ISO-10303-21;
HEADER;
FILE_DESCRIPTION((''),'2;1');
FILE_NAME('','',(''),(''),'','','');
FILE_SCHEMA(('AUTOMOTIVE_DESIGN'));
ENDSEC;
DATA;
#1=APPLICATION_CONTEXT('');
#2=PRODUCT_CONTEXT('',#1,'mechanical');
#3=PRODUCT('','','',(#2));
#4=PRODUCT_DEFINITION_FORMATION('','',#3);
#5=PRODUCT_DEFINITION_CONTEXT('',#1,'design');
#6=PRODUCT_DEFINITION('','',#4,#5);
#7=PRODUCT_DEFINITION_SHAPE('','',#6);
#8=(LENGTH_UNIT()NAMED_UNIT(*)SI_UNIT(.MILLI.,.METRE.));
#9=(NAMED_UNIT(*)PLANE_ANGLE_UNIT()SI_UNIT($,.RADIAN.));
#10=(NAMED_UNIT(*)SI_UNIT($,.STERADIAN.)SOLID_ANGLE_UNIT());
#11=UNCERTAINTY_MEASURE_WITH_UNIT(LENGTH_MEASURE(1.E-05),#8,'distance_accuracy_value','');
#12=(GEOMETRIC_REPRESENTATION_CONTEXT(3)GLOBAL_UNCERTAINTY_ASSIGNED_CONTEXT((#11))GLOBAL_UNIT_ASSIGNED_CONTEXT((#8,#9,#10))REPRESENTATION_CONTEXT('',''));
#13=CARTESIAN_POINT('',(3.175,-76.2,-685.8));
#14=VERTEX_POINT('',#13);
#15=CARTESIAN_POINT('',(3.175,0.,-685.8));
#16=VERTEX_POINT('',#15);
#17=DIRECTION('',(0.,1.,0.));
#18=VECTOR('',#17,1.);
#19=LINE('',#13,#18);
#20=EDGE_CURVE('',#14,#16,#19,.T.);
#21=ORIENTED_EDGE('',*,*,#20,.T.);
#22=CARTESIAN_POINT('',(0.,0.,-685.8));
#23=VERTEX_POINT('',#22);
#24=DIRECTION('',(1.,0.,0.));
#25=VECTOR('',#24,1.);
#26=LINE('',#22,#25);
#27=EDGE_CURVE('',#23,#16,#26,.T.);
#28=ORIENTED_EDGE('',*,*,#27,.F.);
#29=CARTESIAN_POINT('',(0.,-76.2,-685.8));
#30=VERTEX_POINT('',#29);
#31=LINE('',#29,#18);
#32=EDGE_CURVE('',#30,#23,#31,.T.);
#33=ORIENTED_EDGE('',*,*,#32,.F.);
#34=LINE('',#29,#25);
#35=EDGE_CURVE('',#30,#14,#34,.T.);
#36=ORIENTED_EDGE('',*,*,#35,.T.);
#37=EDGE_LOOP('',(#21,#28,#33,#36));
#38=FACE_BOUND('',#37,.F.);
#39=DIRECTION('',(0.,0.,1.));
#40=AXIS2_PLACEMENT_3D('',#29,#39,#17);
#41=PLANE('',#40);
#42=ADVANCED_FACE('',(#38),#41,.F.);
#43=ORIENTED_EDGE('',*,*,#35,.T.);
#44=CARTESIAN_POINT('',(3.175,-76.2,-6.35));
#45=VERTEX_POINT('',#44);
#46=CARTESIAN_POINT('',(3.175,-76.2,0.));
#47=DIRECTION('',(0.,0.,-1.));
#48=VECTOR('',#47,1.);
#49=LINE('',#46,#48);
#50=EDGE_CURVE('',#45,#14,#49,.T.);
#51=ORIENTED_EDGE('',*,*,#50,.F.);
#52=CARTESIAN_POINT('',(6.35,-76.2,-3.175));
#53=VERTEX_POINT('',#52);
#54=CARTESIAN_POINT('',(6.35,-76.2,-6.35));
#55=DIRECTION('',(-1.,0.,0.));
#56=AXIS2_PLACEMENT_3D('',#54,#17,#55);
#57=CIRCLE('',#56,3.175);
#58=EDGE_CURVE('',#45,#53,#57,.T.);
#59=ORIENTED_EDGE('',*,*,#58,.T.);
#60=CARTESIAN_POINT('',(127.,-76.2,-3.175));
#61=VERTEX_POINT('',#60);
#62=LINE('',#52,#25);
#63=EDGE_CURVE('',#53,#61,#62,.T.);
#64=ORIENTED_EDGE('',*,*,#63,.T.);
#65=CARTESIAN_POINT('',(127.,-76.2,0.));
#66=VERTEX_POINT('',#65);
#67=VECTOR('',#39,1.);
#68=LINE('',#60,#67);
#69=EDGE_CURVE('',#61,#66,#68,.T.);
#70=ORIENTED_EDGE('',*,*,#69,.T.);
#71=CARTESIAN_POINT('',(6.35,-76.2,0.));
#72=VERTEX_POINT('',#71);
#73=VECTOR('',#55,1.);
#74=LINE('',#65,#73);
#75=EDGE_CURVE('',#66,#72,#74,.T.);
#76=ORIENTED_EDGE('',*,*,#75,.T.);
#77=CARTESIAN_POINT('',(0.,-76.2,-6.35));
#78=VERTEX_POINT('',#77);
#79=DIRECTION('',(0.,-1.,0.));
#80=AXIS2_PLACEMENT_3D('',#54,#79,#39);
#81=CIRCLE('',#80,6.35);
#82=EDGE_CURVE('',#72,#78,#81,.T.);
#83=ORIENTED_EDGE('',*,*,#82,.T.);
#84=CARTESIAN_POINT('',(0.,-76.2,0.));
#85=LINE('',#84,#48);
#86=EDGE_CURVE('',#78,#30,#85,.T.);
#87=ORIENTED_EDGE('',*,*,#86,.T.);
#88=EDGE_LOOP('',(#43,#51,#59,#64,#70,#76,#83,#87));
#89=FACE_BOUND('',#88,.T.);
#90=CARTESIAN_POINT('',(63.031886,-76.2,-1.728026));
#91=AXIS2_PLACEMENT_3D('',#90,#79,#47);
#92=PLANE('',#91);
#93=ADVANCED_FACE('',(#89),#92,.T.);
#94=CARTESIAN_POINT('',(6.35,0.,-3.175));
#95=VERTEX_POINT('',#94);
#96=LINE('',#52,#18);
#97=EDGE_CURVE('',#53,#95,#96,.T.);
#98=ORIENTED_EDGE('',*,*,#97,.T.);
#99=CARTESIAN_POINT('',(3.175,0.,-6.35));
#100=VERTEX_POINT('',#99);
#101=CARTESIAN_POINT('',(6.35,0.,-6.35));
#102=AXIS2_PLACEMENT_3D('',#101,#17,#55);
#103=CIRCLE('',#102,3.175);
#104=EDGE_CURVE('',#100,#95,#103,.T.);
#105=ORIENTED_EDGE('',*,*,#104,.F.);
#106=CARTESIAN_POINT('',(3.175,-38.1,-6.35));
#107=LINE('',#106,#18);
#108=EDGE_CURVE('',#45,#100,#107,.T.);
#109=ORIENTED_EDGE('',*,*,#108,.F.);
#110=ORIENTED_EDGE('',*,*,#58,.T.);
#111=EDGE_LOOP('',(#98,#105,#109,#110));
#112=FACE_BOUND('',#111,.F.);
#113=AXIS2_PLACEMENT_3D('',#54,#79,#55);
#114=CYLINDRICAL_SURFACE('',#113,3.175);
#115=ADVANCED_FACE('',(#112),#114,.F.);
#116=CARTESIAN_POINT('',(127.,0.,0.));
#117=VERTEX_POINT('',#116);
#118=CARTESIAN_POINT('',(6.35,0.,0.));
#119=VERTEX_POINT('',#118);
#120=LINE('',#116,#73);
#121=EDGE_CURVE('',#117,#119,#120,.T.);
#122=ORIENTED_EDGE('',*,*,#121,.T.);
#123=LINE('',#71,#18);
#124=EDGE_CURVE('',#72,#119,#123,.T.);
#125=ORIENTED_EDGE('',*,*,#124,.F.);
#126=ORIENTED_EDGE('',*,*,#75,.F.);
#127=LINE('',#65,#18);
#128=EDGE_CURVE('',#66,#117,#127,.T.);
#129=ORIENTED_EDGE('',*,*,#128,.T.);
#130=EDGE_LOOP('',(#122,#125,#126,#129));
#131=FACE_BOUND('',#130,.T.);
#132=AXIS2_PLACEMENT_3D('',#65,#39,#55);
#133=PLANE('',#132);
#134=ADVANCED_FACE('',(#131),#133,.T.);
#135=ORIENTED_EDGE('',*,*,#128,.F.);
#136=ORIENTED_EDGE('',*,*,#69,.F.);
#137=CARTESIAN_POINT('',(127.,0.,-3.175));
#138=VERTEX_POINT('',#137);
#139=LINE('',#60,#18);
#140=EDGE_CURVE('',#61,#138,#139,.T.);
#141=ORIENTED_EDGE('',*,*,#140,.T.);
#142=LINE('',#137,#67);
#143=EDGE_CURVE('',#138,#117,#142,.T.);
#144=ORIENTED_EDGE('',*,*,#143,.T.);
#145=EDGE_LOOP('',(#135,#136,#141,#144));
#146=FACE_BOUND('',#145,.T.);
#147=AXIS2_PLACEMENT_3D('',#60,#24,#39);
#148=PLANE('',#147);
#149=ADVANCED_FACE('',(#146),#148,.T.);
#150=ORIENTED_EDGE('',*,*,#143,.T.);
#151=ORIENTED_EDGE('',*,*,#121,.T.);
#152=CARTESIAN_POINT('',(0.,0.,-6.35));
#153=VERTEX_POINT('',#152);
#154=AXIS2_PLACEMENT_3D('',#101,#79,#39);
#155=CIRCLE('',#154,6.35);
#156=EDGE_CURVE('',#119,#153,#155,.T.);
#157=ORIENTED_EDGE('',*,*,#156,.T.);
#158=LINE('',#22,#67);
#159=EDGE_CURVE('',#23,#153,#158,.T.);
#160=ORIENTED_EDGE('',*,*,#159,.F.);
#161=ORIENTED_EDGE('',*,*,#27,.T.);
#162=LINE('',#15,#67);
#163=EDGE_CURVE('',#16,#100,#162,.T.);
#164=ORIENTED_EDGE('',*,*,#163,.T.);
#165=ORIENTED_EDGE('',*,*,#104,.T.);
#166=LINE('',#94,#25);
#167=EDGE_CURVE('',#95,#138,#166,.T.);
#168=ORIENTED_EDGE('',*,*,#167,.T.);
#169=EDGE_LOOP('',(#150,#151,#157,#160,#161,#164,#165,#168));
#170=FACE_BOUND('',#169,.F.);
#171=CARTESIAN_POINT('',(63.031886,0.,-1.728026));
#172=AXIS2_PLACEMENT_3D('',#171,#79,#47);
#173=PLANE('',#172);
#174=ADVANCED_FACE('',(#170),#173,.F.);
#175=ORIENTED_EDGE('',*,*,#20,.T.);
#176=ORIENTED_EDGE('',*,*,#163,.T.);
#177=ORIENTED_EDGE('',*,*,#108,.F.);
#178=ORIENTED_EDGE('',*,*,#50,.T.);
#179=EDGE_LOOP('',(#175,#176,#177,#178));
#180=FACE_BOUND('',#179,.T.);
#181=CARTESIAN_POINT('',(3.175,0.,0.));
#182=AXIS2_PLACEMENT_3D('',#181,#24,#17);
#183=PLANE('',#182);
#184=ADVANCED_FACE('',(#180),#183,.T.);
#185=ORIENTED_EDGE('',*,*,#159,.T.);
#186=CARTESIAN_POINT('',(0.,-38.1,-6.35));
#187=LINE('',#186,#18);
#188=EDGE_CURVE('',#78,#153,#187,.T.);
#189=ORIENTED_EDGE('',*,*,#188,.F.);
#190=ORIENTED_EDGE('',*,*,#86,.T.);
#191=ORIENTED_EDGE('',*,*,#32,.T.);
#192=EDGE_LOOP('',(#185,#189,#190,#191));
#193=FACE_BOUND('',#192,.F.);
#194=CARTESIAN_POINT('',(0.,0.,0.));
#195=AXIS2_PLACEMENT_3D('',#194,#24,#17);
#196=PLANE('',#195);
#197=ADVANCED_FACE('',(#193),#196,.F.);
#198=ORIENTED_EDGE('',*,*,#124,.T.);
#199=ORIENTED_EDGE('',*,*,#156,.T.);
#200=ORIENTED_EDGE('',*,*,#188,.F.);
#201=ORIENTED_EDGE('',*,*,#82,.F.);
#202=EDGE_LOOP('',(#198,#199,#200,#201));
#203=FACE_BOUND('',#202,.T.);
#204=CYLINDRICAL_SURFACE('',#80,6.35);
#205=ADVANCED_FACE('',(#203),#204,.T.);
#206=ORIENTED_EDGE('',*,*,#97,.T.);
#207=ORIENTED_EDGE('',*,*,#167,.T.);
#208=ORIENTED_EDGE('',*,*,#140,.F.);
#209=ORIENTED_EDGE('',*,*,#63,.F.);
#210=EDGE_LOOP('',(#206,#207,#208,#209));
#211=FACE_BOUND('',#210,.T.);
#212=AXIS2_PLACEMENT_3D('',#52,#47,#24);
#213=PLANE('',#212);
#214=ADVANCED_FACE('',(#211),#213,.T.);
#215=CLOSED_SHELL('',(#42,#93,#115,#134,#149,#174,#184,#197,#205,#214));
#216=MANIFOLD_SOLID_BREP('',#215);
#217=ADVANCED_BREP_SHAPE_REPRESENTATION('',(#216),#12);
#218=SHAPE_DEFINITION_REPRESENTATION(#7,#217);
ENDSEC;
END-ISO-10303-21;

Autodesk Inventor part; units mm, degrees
ref_plane "YZ Plane" through (0, 0, 0) normal (1, 0, 0) x (0, 1, 0)
ref_plane "XZ Plane" through (0, 0, 0) normal (0, 1, 0) x (-1, 0, 0)
ref_plane "XY Plane" through (0, 0, 0) normal (0, 0, 1) x (1, 0, 0)
sketch "Sketch1" plane through (0, 0, 0) normal (1, 0, 0) x (0, 1, 0)
  line L0 (0, 0) -> (-76.2, 0)
  line L1 (-76.2, 0) -> (-76.2, -685.8)
  line L2 (-76.2, -685.8) -> (0, -685.8)
  line L3 (0, -685.8) -> (0, 0)
  dimension "d0" = 76.2
  dimension "d1" = 685.8
extrude "Plate1" add sketch "Sketch1" along normal blind 3.175
sketch "Sketch2" plane through (0, -76.2, -3.175) normal (0, 0, 1) x (1, 0, 0)
  line L0 (0, 76.2) -> (0, 0)
  line L1 (0, 0) -> (127, 0)
  line L2 (127, 0) -> (127, 76.2)
  line L3 (127, 76.2) -> (0, 76.2)
edge flange "Flange1" height 127 angle 90 thickness 3.175 bend radius 3.175 thickness toward (0, 0, 1) relief tear relief width 3.175 relief depth 1.5875 edges at (3.175, -38.1, 0) wall of the first edge with corners at (0, 0, -3.175) (0, -76.2, -3.175) (127, -76.2, -3.175) (127, 0, -3.175)
bend "Bend1"
corner "Corner1"
sketch "Sketch3" plane through (3.175, 0, 0) normal (1, 0, 0) x (0, 0, -1)
  point P0 (0, 0)
equation "\"d3\" = BendReliefWidth"
equation "\"d4\" = BendReliefDepth"
equation "\"d5\" = MinimumRemnant"
equation "\"d6\" = BendRadius"
equation "\"d9\" = BendRadius"
equation "\"d10\" = CornerReliefSize"
equation "\"d11\" = GapSize"
equation "\"d12\" = JacobiRadiusSize"
equation "\"BendRadius\" = Thickness"
equation "\"BendReliefWidth\" = Thickness"
equation "\"BendReliefDepth\" = 0.5 * Thickness"
equation "\"CornerReliefSize\" = 4 * Thickness"
equation "\"MinimumRemnant\" = 2 * Thickness"
equation "\"TransitionRadius\" = BendRadius"
equation "\"JacobiRadiusSize\" = BendRadius"
equation "\"GapSize\" = Thickness"
equation "\"d2\" = BendRadius"
equation "\"Thickness\" = 3.175"
properties part number "ForkLift mockup"
